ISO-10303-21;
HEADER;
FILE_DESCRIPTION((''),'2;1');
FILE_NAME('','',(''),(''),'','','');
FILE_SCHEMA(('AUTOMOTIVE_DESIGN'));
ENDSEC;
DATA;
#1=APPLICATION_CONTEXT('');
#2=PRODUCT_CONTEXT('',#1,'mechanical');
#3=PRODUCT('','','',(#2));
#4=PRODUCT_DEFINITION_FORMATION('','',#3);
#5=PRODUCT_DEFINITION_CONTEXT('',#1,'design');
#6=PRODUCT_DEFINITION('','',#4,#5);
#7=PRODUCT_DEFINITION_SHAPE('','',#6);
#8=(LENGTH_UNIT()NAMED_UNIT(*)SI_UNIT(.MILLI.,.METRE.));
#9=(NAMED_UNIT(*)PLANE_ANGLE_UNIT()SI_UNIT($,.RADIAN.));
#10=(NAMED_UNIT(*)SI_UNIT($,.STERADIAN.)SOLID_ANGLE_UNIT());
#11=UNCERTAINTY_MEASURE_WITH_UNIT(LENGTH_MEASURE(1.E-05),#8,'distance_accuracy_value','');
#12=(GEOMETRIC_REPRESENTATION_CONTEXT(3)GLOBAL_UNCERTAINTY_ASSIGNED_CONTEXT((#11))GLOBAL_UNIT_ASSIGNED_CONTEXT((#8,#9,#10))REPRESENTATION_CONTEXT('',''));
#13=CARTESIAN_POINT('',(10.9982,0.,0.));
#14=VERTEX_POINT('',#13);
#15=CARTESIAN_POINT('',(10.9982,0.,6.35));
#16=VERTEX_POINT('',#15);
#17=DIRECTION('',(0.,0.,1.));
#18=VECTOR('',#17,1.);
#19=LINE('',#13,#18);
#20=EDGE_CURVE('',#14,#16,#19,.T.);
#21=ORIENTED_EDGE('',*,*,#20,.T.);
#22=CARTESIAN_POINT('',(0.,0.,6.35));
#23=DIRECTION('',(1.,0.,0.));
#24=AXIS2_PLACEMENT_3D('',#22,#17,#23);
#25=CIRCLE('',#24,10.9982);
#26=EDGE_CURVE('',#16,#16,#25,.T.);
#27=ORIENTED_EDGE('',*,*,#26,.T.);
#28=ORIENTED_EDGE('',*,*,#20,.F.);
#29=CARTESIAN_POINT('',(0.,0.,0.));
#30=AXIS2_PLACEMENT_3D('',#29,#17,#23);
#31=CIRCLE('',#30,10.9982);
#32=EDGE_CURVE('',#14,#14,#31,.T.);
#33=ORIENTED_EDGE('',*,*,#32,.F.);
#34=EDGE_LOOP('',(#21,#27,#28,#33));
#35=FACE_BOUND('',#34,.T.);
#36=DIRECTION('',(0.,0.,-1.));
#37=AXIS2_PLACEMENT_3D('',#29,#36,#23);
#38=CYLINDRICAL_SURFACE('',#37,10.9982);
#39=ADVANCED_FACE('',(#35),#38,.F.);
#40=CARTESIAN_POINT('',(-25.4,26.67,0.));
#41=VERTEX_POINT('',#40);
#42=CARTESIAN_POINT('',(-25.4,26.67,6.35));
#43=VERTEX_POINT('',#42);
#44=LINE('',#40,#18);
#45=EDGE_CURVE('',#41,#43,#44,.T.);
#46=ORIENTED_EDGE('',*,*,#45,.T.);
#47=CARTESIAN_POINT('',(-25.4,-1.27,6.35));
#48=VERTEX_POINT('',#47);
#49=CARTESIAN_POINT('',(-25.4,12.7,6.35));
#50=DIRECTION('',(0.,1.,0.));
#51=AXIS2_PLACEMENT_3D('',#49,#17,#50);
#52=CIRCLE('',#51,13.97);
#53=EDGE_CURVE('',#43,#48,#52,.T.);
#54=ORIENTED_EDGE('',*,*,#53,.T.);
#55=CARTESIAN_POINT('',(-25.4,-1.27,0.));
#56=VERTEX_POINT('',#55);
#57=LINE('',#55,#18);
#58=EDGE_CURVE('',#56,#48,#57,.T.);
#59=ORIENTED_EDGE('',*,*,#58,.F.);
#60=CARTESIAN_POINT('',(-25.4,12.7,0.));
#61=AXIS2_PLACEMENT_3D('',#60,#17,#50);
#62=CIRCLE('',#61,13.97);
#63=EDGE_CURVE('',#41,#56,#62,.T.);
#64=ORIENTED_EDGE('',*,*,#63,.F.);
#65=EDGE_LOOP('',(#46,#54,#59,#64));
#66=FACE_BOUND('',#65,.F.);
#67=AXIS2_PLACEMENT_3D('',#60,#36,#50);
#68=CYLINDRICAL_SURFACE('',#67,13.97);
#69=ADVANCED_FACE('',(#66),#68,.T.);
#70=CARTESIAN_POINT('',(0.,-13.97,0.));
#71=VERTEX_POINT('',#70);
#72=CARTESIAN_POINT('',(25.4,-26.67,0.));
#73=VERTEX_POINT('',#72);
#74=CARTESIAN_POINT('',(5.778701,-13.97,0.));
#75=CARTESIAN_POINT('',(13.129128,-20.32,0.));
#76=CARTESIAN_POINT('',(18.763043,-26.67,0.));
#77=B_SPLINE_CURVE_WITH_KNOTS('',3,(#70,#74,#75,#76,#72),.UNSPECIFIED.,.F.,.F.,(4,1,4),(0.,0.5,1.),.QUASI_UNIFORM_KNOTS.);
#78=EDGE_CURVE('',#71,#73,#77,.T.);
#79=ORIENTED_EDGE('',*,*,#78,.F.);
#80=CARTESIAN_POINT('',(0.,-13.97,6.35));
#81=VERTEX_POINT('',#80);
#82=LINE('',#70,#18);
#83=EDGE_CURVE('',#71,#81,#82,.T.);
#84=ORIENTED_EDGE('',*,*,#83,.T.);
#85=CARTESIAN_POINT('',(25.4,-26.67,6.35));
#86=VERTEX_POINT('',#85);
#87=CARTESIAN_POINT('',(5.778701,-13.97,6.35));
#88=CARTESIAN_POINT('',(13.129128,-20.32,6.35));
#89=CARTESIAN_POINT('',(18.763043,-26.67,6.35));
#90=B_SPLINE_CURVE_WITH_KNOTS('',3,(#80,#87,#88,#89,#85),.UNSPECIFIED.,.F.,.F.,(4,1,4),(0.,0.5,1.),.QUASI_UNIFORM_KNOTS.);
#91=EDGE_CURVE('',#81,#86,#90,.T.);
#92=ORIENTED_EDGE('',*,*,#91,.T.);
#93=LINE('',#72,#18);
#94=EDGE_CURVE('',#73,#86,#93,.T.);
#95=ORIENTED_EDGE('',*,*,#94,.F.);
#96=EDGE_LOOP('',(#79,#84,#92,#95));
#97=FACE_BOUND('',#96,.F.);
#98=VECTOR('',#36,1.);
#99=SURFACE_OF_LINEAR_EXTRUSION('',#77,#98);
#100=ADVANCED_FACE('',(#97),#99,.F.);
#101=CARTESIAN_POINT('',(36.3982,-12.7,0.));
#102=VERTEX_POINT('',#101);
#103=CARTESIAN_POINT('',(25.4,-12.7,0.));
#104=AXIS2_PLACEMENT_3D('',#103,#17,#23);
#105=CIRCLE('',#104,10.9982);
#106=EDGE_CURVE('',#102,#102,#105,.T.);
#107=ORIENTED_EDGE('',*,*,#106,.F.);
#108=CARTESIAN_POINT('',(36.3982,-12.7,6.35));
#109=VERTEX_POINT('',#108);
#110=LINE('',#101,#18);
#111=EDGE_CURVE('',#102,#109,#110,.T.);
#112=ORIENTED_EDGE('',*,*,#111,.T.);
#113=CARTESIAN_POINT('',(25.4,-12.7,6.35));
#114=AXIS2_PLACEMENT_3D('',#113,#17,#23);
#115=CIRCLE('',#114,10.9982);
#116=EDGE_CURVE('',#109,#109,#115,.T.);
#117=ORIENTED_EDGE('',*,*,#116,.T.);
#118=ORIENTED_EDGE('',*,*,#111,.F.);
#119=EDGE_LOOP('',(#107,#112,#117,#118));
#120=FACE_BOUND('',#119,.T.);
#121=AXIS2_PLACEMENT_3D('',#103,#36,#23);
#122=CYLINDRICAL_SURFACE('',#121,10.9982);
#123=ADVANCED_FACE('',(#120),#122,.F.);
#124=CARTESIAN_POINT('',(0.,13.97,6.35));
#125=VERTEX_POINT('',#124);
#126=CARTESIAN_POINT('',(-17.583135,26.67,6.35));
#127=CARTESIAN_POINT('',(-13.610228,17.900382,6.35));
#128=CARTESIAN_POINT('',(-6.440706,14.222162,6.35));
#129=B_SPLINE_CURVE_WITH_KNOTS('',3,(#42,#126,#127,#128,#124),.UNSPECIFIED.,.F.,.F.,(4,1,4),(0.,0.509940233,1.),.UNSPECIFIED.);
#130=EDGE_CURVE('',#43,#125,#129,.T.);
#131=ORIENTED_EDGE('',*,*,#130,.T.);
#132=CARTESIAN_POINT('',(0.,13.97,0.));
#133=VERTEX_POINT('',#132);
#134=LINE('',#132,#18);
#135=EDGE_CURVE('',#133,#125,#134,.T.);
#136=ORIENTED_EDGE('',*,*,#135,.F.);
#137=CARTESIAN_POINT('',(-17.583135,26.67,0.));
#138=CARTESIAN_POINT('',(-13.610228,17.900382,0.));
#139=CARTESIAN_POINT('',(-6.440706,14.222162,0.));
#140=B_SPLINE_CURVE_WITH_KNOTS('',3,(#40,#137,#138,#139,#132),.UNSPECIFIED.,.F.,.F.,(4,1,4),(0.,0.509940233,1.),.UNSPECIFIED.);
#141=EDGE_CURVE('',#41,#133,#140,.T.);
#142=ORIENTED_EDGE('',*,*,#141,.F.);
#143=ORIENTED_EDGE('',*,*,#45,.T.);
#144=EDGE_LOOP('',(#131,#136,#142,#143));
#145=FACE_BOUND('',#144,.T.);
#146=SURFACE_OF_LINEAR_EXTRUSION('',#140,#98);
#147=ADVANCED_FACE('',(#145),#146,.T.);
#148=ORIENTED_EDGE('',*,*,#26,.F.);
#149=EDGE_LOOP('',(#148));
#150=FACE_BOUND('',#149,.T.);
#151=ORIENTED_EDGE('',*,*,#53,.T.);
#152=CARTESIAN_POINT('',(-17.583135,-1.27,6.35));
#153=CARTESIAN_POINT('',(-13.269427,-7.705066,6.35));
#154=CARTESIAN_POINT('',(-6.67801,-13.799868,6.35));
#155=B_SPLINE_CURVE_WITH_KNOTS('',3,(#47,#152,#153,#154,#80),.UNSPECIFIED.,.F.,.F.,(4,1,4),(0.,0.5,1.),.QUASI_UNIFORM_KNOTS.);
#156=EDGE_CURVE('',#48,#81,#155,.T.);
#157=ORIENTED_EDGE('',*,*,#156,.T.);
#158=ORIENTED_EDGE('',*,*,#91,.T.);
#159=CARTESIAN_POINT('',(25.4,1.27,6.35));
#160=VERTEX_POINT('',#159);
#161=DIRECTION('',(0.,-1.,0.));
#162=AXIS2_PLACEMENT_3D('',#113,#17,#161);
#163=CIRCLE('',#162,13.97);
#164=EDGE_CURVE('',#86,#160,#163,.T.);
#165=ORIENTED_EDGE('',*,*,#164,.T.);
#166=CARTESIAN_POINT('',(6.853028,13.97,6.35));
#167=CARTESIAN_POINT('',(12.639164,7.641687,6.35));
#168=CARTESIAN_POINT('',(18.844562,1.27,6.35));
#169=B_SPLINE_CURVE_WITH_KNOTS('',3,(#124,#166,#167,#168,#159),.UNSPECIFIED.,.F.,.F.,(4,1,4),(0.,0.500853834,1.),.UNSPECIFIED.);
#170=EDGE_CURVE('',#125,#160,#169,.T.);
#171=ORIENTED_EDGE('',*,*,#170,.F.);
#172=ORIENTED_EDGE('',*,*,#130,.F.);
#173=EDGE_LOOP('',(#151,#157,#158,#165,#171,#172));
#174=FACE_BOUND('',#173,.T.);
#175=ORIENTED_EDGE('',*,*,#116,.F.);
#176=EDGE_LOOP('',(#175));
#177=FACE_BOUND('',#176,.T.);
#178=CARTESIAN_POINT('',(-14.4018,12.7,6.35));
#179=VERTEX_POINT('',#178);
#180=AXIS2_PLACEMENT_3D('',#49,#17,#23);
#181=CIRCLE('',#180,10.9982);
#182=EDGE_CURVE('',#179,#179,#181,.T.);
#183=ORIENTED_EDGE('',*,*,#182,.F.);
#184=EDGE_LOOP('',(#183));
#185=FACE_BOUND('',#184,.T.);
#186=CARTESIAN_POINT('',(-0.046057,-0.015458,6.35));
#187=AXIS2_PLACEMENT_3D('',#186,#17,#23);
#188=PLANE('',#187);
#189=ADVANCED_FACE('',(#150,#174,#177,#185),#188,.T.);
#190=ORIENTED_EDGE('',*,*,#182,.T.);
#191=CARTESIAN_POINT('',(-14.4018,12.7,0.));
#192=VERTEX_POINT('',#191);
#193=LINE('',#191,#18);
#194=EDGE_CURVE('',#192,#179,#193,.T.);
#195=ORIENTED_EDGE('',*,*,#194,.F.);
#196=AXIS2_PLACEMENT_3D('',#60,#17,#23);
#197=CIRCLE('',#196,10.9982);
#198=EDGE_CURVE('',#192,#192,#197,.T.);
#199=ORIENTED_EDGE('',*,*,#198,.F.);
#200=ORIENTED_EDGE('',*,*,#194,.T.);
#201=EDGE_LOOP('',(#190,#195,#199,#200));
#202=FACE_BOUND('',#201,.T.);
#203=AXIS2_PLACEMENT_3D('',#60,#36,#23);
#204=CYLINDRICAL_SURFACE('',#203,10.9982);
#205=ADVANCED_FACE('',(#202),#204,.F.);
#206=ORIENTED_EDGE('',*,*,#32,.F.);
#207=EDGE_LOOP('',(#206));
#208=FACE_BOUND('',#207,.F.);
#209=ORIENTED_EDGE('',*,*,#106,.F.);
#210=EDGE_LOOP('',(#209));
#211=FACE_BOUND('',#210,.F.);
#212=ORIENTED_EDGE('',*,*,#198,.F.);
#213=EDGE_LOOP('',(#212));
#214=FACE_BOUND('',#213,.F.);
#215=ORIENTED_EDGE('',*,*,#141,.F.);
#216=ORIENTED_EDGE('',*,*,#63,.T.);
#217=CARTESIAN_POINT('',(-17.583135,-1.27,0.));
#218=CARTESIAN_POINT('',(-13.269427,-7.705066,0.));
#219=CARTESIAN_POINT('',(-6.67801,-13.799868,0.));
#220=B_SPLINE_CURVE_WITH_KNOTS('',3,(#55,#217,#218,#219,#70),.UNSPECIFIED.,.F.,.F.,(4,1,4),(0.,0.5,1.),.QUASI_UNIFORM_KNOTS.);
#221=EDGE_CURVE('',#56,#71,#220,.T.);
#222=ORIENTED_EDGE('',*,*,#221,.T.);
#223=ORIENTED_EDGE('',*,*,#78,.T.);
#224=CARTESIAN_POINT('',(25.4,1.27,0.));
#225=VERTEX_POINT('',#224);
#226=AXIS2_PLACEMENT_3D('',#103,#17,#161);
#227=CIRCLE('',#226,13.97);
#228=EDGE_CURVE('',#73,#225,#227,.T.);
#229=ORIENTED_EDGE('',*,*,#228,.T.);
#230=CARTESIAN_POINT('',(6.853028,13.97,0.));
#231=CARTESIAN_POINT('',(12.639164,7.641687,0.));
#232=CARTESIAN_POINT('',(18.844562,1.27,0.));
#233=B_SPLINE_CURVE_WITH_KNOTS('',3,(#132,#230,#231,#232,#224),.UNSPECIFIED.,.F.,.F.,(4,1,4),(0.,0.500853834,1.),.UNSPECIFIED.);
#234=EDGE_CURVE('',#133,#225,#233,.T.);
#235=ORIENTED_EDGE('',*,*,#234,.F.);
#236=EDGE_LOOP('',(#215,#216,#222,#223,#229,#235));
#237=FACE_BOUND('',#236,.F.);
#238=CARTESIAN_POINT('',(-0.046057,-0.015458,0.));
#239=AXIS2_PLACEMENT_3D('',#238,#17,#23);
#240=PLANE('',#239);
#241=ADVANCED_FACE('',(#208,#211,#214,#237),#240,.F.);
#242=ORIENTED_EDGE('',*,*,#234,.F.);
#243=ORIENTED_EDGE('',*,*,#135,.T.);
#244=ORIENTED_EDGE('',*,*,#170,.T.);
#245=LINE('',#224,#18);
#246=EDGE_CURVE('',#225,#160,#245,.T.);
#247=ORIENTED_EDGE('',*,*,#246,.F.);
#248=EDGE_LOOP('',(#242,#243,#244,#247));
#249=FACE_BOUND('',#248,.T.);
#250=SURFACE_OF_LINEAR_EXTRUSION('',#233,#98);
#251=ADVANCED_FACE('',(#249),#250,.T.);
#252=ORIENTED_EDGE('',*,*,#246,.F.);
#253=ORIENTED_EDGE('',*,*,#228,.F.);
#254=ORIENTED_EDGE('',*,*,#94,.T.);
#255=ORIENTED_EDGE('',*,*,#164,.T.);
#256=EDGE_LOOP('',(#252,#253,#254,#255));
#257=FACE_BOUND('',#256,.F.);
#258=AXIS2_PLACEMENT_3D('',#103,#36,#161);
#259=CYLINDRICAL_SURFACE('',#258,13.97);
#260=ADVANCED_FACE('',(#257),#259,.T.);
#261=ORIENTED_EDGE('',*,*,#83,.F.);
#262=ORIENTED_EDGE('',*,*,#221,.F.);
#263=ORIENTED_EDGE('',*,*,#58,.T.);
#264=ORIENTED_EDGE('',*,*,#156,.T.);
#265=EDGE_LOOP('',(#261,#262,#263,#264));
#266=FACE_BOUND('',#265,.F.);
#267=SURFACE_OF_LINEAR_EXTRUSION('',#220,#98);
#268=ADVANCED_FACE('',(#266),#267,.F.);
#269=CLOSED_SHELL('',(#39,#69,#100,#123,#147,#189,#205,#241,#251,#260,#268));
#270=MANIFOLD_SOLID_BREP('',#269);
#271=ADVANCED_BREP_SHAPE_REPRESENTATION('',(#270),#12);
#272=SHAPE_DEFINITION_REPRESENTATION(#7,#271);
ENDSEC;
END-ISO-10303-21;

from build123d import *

# Parameters (mm, degrees)
F0_R     = 10.9982
F1_DEPTH = 6.35


with BuildPart() as f1:
    # F0 (on Top) → F1 (new body)
    with BuildSketch(Plane.XY):
        with BuildLine():
            add(Edge.make_bspline(
                [(0, -13.97), (5.7787014373, -13.97), (13.1291277882, -20.32), (18.7630429864, -26.67), (25.4, -26.67)],
                knots=[0, 0, 0, 0, 0.5, 1, 1, 1, 1], degree=3))
            ThreePointArc((25.4, -26.67), (39.37, -12.7), (25.4, 1.27))
            add(Edge.make_bspline(
                [(0, 13.97), (6.853028044, 13.97), (12.6391638998, 7.6416874466), (18.8445616513, 1.27), (25.4, 1.27)],
                knots=[0, 0, 0, 0, 0.500853834, 1, 1, 1, 1], degree=3))
            add(Edge.make_bspline(
                [(-25.4, 26.67), (-17.5831354201, 26.67), (-13.6102278083, 17.9003816405), (-6.4407057817, 14.2221620935), (0, 13.97)],
                knots=[0, 0, 0, 0, 0.5099402335, 1, 1, 1, 1], degree=3))
            ThreePointArc((-25.4, 26.67), (-39.37, 12.7), (-25.4, -1.27))
            add(Edge.make_bspline(
                [(-25.4, -1.27), (-17.5831354201, -1.27), (-13.269427077, -7.7050659785), (-6.678010426, -13.799868043), (0, -13.97)],
                knots=[0, 0, 0, 0, 0.5, 1, 1, 1, 1], degree=3))
        make_face()
        Circle(F0_R, mode=Mode.SUBTRACT)
        with Locations((25.4, -12.7)):
            Circle(F0_R, mode=Mode.SUBTRACT)
        with Locations((-25.4, 12.7)):
            Circle(F0_R, mode=Mode.SUBTRACT)
    extrude(amount=F1_DEPTH)


solid = f1.part
